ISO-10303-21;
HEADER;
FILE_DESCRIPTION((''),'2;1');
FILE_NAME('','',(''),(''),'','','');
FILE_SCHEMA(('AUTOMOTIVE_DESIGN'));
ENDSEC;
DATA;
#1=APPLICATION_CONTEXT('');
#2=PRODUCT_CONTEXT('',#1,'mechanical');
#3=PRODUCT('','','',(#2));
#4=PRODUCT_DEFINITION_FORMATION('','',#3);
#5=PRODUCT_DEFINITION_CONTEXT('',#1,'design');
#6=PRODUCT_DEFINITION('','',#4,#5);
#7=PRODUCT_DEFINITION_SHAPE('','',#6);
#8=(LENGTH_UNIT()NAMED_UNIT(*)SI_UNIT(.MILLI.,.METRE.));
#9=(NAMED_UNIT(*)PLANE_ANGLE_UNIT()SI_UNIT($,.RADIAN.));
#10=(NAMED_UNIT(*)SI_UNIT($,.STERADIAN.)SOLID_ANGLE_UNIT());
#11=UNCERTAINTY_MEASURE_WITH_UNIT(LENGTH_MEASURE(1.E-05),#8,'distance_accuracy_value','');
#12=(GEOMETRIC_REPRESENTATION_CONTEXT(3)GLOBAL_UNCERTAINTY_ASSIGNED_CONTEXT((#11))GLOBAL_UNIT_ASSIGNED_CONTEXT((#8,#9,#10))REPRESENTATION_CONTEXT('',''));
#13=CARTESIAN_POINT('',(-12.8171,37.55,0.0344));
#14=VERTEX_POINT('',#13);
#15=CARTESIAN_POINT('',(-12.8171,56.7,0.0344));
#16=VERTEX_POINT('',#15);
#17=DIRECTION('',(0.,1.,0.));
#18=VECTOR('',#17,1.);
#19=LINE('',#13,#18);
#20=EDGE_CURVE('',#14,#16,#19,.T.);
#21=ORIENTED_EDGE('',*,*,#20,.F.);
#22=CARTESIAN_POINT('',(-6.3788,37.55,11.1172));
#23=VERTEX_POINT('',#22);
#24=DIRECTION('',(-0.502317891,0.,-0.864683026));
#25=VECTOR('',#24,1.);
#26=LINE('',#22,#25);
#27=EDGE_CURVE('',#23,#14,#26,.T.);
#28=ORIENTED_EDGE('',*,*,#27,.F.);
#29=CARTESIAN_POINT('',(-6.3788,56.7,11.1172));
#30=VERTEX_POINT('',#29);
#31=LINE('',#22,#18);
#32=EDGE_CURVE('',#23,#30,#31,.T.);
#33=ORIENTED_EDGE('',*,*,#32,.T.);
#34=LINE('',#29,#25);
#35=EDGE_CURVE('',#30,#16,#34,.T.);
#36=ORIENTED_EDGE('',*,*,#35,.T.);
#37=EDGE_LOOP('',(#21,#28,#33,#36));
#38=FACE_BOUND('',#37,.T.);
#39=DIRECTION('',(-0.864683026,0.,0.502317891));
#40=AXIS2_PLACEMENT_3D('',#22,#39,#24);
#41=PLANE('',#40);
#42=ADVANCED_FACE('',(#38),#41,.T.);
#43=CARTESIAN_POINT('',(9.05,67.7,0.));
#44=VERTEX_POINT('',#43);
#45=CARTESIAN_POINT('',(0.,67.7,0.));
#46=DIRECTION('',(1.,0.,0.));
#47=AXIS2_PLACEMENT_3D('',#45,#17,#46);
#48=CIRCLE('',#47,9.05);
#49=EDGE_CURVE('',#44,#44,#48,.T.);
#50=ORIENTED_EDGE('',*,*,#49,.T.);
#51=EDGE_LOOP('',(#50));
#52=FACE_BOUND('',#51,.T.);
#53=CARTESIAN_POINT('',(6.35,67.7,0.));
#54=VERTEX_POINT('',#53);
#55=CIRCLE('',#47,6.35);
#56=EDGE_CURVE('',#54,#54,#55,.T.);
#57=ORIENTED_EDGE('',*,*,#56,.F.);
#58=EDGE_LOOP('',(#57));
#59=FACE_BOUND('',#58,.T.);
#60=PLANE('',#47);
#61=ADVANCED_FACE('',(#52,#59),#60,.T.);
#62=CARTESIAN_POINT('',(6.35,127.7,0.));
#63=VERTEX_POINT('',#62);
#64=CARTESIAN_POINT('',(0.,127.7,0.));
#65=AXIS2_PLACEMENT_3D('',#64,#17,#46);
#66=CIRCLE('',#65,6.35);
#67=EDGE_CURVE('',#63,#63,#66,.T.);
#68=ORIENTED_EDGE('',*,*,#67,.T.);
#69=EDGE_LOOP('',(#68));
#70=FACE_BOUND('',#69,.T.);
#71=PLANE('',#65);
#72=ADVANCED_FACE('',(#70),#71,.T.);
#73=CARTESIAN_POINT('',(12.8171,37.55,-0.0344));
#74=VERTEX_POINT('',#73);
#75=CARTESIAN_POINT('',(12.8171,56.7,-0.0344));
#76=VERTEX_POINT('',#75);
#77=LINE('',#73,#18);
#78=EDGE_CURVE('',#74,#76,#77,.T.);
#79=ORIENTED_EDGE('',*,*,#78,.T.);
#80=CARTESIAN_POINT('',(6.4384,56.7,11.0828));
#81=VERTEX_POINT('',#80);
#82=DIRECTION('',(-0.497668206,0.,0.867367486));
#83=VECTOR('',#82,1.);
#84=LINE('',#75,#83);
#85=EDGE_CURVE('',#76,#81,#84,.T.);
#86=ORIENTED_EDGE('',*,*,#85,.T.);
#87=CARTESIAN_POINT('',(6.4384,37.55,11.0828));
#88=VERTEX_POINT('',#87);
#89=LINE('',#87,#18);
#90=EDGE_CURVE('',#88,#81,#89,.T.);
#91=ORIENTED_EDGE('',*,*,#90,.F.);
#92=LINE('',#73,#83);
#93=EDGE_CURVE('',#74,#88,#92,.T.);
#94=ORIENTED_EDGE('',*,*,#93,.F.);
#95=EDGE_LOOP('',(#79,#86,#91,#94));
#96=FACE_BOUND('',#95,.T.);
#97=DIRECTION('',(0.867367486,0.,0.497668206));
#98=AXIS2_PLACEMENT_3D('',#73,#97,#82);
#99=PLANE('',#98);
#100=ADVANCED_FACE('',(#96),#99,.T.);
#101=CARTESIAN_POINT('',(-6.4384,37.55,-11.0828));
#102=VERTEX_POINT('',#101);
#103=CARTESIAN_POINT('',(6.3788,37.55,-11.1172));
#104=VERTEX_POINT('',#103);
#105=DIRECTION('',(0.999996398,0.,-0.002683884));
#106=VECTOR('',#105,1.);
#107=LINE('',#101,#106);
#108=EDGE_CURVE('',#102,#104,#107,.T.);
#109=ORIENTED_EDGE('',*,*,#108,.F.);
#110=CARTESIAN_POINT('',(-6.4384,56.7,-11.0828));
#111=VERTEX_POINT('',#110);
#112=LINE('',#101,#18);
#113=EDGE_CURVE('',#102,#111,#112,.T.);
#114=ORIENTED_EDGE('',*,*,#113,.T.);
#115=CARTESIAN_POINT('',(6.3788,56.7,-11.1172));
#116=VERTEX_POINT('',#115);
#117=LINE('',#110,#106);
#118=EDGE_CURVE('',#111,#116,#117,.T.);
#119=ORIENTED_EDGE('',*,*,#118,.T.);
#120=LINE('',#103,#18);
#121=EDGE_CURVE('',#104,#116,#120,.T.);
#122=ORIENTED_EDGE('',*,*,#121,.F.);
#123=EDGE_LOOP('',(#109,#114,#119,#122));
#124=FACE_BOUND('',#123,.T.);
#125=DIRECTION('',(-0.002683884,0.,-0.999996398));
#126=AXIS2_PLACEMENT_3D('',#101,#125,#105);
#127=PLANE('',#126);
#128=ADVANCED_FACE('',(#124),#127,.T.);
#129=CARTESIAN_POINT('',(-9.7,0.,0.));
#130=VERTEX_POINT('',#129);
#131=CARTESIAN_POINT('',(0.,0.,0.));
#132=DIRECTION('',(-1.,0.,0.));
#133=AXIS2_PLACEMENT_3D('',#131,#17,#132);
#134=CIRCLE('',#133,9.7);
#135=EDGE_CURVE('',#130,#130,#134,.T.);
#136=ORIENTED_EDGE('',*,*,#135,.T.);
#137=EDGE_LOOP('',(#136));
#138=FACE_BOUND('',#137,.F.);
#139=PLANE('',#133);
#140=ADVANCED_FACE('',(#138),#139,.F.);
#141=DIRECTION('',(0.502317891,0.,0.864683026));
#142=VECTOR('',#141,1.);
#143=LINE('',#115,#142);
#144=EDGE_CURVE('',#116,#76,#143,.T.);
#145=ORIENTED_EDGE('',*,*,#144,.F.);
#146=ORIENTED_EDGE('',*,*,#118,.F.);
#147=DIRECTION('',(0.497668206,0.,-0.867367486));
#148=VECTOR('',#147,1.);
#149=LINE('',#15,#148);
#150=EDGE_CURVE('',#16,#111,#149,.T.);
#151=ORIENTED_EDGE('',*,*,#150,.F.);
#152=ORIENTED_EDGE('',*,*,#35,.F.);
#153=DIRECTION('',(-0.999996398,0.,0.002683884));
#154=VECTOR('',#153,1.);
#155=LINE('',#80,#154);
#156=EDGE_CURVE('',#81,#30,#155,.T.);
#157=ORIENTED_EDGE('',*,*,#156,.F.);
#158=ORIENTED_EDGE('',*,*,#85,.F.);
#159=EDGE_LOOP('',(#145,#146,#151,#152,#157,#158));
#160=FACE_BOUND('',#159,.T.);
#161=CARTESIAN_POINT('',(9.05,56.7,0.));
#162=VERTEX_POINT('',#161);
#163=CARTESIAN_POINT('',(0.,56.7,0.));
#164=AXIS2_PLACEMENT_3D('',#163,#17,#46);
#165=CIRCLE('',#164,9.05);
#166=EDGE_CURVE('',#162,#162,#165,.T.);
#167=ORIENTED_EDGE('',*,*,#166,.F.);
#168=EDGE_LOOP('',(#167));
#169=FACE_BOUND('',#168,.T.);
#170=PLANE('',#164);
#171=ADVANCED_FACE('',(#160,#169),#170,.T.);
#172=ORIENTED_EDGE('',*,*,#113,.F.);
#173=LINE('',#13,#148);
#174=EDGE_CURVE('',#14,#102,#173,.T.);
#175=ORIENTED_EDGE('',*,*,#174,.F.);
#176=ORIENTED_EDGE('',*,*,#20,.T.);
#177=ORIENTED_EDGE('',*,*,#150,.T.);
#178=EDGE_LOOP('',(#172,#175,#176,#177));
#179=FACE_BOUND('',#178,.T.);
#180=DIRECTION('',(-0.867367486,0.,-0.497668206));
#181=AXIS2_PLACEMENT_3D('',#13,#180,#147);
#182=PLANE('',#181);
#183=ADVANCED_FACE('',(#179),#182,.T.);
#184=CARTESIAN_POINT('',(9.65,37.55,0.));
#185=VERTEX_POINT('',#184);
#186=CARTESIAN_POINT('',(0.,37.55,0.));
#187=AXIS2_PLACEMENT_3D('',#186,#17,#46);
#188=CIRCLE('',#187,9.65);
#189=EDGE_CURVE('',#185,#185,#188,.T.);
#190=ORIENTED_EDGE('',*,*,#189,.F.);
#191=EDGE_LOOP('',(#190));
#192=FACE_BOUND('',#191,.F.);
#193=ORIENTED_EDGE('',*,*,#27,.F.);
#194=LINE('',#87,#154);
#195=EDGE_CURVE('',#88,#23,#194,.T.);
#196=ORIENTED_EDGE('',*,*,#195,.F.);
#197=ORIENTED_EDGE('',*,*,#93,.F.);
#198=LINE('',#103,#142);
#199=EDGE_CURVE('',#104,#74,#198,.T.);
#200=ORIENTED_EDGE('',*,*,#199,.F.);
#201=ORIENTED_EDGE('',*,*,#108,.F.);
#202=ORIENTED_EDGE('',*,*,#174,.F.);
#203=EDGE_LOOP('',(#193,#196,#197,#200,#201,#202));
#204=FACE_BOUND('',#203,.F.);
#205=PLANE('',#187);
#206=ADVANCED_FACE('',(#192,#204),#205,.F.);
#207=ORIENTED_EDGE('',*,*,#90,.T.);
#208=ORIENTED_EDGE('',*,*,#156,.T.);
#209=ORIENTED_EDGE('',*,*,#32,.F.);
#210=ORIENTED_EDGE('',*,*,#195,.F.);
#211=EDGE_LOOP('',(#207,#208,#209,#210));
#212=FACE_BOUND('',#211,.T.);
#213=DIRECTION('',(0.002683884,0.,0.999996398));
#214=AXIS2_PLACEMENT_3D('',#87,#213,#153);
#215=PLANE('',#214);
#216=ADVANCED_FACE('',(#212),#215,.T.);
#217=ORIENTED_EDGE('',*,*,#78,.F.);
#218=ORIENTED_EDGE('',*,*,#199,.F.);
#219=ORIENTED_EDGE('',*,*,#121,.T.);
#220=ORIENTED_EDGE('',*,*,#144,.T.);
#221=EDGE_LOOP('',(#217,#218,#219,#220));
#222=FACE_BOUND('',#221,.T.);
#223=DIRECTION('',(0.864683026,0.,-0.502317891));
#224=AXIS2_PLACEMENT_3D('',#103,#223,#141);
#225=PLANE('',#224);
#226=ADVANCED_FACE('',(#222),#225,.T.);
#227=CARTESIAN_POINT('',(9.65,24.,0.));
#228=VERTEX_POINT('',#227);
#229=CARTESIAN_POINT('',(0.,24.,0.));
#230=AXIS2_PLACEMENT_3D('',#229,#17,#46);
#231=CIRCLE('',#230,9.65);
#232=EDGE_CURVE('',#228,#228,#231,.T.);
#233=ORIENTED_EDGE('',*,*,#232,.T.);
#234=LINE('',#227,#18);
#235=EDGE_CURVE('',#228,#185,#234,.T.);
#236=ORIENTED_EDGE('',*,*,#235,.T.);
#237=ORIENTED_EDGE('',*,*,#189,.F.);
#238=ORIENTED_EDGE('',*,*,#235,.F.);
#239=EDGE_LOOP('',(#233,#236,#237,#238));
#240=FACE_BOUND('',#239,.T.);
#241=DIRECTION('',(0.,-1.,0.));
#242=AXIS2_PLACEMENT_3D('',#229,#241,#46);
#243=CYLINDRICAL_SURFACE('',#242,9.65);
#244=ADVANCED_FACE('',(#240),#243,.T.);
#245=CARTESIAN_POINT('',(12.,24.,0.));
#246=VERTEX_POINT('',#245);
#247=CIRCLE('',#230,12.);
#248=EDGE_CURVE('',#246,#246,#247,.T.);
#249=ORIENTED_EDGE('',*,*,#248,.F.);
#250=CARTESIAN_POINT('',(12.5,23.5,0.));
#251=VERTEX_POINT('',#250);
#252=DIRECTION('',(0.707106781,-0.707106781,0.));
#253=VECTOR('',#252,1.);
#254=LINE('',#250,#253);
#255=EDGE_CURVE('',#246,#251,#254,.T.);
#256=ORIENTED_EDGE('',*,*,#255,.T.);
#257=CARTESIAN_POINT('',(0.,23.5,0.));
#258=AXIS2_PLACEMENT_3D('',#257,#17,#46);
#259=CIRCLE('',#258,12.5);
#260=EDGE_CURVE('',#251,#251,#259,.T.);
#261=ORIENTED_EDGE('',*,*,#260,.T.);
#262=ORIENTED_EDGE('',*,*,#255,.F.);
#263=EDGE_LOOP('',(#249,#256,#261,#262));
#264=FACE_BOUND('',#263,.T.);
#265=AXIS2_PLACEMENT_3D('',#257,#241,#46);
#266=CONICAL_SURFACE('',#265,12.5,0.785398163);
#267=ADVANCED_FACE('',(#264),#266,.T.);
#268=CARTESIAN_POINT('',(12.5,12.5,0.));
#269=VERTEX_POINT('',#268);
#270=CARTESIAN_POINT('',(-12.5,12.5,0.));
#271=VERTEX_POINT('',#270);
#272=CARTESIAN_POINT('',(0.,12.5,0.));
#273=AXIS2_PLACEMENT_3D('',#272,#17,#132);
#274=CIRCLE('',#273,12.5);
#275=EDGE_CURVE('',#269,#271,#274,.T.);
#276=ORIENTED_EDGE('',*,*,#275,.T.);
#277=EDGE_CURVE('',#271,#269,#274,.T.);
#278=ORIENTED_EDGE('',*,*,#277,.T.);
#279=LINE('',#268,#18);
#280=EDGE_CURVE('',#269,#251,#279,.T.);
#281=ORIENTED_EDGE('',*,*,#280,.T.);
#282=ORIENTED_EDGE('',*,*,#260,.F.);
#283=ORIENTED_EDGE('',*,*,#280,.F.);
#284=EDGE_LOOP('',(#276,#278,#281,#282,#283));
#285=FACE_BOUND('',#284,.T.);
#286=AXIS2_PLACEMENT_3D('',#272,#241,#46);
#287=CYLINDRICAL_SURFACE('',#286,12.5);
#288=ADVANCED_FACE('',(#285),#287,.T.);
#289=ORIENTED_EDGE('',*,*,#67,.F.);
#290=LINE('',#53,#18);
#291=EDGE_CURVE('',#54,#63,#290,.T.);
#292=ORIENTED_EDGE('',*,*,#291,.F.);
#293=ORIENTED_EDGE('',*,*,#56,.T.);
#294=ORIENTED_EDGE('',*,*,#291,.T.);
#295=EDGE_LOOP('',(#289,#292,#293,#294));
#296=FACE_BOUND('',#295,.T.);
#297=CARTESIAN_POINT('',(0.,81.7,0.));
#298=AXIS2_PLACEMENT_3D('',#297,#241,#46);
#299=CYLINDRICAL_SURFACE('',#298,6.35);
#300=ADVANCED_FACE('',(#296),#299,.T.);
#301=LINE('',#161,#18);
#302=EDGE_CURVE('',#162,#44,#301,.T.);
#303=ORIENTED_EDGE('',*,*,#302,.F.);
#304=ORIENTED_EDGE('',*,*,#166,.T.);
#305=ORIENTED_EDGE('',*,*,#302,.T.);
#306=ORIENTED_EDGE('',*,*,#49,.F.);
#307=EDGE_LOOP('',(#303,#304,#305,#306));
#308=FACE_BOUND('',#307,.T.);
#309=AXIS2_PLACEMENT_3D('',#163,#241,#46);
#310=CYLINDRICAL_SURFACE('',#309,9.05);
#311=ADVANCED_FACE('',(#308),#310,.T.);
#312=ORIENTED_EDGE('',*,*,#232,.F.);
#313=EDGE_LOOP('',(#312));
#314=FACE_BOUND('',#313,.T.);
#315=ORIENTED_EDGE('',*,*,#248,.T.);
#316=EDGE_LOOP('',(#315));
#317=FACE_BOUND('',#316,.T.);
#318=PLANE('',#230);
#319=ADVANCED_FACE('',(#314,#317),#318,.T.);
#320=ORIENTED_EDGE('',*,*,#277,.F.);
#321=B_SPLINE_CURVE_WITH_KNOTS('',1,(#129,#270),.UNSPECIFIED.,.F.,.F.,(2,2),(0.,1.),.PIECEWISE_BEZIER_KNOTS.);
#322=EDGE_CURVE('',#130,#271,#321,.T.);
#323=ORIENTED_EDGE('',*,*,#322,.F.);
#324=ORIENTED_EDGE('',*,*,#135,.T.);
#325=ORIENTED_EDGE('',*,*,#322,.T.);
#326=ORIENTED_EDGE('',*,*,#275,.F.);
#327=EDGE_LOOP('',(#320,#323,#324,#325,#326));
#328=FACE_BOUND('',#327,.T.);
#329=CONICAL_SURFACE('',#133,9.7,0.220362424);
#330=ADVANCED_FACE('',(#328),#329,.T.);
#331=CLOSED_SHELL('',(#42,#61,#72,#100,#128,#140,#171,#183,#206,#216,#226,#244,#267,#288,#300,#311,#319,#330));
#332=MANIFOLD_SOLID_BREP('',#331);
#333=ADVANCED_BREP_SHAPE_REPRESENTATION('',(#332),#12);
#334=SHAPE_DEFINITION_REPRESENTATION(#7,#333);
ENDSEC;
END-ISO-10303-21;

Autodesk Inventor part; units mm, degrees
ref_plane "YZ Plane" through (0, 0, 0) normal (1, 0, 0) x (0, 1, 0)
ref_plane "XY Plane" through (0, 0, 0) normal (0, 0, 1) x (1, 0, 0)
sketch "Sketch1" plane through (0, 0, 0) normal (0, 1, 0) x (-1, 0, 0)
  circle A0 centre (0, 0) radius 9.7
  dimension "d0" = 19.4
ref_plane "Work Plane1" through (0, 12.5, 0) normal (0, 1, 0) x (-1, 0, 0)
sketch "Sketch2" plane through (0, 12.5, 0) normal (0, 1, 0) x (-1, 0, 0)
  circle A0 centre (0, 0) radius 12.5
  dimension "d2" = 25
loft "Loft1" add profiles "Sketch1", "Sketch2"
sketch "Sketch5" plane through (0, 12.5, 0) normal (0, 1, 0) x (1, 0, 0)
  circle A0 centre (0, 0) radius 12.5
  dimension "d9" = 25
extrude "Extrusion1" add sketch "Sketch5" along normal blind 11.5
sketch "Sketch6" plane through (0, 24, 0) normal (0, 1, 0) x (1, 0, 0)
  circle A0 centre (0, 0) radius 9.65
  dimension "d12" = 19.3
extrude "Extrusion2" add sketch "Sketch6" along normal blind 13.55
sketch "Sketch7" plane through (0, 37.55, 0) normal (0, 1, 0) x (1, 0, 0)
  line L0 (-6.3788, -11.1172) -> (-12.8171, -0.0344)
  line L1 (-12.8171, -0.0344) -> (-6.4384, 11.0828)
  line L2 (-6.4384, 11.0828) -> (6.3788, 11.1172)
  line L3 (6.3788, 11.1172) -> (12.8171, 0.0344)
  line L4 (12.8171, 0.0344) -> (6.4384, -11.0828)
  line L5 (6.4384, -11.0828) -> (-6.3788, -11.1172)
  point P0 (0, 0)
  point P1 (0, 0)
  dimension "d15" = 22.2
extrude "Extrusion3" add sketch "Sketch7" along normal blind 19.15
sketch "Sketch8" plane through (0, 56.7, 0) normal (0, 1, 0) x (1, 0, 0)
  circle A0 centre (0, 0) radius 9.05
  dimension "d18" = 18.1
extrude "Extrusion4" add sketch "Sketch8" along normal blind 11
sketch "Sketch9" plane through (0, 67.7, 0) normal (0, 1, 0) x (1, 0, 0)
  circle A0 centre (0, 0) radius 6.35
  dimension "d21" = 12.7
extrude "Extrusion5" add sketch "Sketch9" along normal blind 14
sketch "Sketch10" plane through (0, 81.7, 0) normal (0, 1, 0) x (1, 0, 0)
  circle A0 centre (0, 0) radius 6.35
  dimension "d26" = 12.7
extrude "Extrusion6" add sketch "Sketch10" along normal blind 46
thread "Thread2" size "1/2-13 UNC" class "2A" standard "ANSI Unified Screw Threads" length 48
chamfer "Chamfer1" distance 0.5 angle 45 1 edges at (-12.5, 24, 0)
properties part number "Soporte Bailarina" material "Steel, Alloy"
